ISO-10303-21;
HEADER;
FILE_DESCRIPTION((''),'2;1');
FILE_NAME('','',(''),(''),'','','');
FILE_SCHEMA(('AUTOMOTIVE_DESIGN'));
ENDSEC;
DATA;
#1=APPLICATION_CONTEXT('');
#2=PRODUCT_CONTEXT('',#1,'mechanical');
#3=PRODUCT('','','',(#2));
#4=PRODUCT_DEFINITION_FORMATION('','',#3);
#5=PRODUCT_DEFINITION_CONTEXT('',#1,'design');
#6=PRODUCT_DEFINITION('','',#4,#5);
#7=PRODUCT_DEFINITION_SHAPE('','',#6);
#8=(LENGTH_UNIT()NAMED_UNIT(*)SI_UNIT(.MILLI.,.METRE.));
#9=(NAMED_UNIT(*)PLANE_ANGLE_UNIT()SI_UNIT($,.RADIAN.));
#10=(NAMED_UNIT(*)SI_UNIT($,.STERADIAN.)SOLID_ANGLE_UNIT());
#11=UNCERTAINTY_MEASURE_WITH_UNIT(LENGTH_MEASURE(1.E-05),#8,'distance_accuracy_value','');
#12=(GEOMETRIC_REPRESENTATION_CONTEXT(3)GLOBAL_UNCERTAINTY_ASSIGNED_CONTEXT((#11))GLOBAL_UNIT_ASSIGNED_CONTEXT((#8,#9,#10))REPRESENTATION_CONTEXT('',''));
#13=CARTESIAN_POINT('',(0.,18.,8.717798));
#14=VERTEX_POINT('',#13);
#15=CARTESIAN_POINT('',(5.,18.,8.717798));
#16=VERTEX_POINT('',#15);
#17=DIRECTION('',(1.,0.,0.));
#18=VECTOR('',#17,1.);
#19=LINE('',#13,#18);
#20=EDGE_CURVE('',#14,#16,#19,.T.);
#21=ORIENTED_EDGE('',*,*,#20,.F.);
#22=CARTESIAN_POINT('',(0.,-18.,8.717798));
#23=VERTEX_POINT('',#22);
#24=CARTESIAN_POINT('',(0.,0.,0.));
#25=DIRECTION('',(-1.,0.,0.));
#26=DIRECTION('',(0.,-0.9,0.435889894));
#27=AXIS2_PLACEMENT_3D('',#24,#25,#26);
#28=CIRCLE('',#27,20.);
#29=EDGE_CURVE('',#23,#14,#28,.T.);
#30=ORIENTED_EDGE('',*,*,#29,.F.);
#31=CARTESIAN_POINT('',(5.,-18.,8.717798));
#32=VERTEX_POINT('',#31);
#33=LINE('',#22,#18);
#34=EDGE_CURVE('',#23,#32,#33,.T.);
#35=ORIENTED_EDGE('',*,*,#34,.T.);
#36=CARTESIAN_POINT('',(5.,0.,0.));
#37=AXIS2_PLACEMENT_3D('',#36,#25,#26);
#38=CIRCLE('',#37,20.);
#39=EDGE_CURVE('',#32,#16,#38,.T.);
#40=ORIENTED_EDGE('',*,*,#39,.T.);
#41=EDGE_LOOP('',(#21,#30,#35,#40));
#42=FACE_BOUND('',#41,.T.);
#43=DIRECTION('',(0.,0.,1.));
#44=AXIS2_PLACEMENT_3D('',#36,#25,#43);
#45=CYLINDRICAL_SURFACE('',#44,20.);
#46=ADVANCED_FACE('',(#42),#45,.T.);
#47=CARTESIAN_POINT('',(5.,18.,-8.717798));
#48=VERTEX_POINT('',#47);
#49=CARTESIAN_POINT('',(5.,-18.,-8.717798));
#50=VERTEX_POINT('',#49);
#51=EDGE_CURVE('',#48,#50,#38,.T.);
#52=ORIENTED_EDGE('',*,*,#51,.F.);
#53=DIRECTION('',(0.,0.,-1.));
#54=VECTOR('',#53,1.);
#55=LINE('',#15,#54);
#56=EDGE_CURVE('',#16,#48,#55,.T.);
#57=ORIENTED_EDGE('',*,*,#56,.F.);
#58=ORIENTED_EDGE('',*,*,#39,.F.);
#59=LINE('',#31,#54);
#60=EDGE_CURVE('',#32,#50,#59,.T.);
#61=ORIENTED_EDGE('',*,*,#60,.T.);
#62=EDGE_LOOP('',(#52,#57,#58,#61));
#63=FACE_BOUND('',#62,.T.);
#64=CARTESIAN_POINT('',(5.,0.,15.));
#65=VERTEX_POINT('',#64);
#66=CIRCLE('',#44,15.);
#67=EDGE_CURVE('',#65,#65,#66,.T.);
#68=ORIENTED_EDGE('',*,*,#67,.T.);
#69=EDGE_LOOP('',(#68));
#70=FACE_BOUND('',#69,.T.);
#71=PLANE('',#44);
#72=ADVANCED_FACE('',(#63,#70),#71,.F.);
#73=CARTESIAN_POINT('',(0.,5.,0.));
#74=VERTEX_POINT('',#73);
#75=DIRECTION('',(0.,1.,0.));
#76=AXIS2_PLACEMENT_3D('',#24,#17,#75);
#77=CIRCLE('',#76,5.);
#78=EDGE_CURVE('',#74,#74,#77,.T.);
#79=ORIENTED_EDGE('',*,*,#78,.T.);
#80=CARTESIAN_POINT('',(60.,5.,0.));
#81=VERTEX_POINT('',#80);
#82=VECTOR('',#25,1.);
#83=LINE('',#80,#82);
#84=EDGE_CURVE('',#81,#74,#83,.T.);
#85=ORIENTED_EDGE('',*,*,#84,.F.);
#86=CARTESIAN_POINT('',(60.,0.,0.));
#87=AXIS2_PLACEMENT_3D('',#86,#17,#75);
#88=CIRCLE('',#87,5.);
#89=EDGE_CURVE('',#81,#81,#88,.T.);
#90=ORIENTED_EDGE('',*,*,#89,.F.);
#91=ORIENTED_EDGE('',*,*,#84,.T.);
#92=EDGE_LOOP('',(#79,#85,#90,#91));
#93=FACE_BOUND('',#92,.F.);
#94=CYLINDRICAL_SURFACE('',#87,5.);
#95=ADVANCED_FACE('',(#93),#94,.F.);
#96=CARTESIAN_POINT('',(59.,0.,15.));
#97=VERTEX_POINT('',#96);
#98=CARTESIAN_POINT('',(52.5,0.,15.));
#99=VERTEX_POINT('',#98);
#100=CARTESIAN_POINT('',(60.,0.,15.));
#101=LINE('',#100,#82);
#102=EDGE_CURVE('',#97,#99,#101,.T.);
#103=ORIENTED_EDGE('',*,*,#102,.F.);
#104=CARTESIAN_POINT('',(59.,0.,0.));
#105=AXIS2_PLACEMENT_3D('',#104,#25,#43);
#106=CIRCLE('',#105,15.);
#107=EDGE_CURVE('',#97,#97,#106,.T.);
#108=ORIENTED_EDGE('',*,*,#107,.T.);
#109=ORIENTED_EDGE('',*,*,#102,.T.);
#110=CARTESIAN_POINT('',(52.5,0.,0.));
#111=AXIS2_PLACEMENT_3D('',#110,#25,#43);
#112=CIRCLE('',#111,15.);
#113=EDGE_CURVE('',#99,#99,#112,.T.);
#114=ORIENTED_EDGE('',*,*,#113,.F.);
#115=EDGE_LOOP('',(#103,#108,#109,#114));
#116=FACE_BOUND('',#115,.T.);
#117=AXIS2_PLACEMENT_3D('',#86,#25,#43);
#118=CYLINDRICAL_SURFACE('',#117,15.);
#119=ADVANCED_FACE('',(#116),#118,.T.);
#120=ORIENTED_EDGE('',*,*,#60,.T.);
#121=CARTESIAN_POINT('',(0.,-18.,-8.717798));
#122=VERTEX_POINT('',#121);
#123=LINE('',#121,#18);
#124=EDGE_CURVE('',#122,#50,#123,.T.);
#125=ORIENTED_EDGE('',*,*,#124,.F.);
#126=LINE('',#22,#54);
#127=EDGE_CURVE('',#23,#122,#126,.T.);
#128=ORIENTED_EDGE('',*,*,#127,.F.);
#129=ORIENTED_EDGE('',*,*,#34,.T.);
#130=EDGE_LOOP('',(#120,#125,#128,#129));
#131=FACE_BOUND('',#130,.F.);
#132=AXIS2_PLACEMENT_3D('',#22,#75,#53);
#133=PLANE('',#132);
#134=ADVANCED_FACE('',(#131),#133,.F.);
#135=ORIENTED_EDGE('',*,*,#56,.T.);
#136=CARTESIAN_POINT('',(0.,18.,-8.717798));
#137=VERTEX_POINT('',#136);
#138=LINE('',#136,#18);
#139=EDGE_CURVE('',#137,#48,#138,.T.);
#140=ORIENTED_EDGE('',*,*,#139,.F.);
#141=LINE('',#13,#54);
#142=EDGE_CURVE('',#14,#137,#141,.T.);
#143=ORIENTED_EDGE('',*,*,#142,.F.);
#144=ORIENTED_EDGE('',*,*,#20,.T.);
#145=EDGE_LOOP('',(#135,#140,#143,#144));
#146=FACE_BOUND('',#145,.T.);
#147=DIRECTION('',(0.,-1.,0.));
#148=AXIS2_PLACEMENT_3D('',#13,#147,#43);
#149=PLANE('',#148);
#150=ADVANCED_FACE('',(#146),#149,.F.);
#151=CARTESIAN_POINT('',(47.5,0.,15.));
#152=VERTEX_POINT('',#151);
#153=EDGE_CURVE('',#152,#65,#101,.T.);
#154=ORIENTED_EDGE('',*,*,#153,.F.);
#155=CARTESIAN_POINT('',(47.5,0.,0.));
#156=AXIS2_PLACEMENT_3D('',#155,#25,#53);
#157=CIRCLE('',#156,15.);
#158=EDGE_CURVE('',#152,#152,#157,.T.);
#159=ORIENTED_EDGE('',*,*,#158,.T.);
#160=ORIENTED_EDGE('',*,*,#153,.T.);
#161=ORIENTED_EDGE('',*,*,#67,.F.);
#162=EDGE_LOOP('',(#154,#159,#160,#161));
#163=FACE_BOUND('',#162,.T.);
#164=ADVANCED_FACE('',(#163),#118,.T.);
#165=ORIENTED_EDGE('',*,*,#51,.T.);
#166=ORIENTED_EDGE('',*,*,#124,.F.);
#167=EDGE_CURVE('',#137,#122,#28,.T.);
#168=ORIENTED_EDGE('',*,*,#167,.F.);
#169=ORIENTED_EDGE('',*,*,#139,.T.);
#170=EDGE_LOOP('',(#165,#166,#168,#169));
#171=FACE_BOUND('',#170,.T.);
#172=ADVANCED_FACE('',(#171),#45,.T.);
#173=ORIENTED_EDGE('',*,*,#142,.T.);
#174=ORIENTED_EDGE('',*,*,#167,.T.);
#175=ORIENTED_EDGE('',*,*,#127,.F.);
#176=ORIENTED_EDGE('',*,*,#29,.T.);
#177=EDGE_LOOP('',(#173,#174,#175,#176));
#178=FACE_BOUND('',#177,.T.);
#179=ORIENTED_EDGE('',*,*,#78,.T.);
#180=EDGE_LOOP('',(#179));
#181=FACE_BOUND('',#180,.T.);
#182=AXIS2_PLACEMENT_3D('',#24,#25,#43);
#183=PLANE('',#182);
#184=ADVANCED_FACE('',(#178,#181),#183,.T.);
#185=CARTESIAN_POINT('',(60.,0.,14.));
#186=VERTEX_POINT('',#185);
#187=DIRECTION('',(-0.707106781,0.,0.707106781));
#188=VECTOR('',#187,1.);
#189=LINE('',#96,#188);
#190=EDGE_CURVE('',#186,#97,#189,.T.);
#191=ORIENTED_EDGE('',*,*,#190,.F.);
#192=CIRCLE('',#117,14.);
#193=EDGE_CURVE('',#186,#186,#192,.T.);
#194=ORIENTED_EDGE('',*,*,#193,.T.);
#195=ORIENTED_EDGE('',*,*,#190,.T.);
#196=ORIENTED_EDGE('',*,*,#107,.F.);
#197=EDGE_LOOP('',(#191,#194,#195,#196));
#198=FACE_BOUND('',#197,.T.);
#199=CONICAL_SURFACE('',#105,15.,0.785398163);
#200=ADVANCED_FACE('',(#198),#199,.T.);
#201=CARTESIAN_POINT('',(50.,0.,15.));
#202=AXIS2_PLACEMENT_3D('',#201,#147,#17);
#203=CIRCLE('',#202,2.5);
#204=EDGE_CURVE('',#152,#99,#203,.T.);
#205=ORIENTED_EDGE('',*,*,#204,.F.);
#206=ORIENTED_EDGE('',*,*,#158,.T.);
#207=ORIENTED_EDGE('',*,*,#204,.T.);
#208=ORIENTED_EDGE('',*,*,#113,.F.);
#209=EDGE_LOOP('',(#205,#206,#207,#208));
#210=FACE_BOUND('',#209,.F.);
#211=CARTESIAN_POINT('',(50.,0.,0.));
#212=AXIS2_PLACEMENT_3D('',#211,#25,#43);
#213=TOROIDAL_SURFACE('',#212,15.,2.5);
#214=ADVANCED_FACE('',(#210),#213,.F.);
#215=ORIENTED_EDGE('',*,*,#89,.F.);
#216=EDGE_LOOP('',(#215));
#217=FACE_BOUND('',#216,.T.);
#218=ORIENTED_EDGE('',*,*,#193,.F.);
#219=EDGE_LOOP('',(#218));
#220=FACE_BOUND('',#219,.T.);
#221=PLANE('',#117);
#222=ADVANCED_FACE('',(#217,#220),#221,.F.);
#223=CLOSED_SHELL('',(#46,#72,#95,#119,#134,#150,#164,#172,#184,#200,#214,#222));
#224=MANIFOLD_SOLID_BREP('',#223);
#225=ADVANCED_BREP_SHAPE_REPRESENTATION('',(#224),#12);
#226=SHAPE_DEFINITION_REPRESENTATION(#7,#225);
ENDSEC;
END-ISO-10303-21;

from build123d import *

# Parameters (mm, degrees)
F2_R     = 5
F3_DEPTH = 60.001
F4_SIZE  = 1
F5_R     = 2.5
F8_DEPTH = 5


# Not quite as in the source:
# - a pattern or mirror of a feature is missing from the dataset's text; its kind, count and spacing are read off the source's solid


with BuildPart() as f1:
    # F0 (on Front) → F1 (revolve)
    with BuildSketch(Plane.XZ):
        Polygon((0, 20), (0, 0), (60, 0), (60, 15), (5, 15), (5, 20), align=None)
    revolve(axis=Axis((31.1737104983, 0, 0), (-1, 0, 0)))

    # F2 (on face) → F3 (cut, through all)
    with BuildSketch(Plane.YZ.offset(60)):
        Circle(F2_R)
    extrude(amount=-F3_DEPTH, mode=Mode.SUBTRACT)

    # F4
    f4_edges = [f1.edges().sort_by_distance(p)[0] for p in [
        (60, 0, -15),
    ]]
    chamfer(f4_edges, length=F4_SIZE)

    # F5 (on Front) → F6 (revolve, cut)
    with BuildSketch(Plane.XZ):
        with Locations((50, 15)):
            Circle(F5_R)
    revolve(axis=Axis((31.1737104983, 0, 0), (-1, 0, 0)), mode=Mode.SUBTRACT)

    # F7 (on face) → F8 (cut, through all)
    with BuildSketch(Plane(origin=(0, 0, 0), x_dir=(0, -1, 0), z_dir=(-1, 0, 0))):
        with BuildLine():
            ThreePointArc((18, -8.7177978871), (19.4935886896, -4.472135955), (20, 0))
            ThreePointArc((20, 0), (19.4935886896, 4.472135955), (18, 8.7177978871))
            Line((18, 8.7177978871), (18, -8.7177978871))
        make_face()
    f8 = extrude(amount=-F8_DEPTH, mode=Mode.SUBTRACT)

    # F8_copies: F8 across plane
    add(f8.mirror(Plane.ZX), mode=Mode.SUBTRACT)


solid = f1.part
